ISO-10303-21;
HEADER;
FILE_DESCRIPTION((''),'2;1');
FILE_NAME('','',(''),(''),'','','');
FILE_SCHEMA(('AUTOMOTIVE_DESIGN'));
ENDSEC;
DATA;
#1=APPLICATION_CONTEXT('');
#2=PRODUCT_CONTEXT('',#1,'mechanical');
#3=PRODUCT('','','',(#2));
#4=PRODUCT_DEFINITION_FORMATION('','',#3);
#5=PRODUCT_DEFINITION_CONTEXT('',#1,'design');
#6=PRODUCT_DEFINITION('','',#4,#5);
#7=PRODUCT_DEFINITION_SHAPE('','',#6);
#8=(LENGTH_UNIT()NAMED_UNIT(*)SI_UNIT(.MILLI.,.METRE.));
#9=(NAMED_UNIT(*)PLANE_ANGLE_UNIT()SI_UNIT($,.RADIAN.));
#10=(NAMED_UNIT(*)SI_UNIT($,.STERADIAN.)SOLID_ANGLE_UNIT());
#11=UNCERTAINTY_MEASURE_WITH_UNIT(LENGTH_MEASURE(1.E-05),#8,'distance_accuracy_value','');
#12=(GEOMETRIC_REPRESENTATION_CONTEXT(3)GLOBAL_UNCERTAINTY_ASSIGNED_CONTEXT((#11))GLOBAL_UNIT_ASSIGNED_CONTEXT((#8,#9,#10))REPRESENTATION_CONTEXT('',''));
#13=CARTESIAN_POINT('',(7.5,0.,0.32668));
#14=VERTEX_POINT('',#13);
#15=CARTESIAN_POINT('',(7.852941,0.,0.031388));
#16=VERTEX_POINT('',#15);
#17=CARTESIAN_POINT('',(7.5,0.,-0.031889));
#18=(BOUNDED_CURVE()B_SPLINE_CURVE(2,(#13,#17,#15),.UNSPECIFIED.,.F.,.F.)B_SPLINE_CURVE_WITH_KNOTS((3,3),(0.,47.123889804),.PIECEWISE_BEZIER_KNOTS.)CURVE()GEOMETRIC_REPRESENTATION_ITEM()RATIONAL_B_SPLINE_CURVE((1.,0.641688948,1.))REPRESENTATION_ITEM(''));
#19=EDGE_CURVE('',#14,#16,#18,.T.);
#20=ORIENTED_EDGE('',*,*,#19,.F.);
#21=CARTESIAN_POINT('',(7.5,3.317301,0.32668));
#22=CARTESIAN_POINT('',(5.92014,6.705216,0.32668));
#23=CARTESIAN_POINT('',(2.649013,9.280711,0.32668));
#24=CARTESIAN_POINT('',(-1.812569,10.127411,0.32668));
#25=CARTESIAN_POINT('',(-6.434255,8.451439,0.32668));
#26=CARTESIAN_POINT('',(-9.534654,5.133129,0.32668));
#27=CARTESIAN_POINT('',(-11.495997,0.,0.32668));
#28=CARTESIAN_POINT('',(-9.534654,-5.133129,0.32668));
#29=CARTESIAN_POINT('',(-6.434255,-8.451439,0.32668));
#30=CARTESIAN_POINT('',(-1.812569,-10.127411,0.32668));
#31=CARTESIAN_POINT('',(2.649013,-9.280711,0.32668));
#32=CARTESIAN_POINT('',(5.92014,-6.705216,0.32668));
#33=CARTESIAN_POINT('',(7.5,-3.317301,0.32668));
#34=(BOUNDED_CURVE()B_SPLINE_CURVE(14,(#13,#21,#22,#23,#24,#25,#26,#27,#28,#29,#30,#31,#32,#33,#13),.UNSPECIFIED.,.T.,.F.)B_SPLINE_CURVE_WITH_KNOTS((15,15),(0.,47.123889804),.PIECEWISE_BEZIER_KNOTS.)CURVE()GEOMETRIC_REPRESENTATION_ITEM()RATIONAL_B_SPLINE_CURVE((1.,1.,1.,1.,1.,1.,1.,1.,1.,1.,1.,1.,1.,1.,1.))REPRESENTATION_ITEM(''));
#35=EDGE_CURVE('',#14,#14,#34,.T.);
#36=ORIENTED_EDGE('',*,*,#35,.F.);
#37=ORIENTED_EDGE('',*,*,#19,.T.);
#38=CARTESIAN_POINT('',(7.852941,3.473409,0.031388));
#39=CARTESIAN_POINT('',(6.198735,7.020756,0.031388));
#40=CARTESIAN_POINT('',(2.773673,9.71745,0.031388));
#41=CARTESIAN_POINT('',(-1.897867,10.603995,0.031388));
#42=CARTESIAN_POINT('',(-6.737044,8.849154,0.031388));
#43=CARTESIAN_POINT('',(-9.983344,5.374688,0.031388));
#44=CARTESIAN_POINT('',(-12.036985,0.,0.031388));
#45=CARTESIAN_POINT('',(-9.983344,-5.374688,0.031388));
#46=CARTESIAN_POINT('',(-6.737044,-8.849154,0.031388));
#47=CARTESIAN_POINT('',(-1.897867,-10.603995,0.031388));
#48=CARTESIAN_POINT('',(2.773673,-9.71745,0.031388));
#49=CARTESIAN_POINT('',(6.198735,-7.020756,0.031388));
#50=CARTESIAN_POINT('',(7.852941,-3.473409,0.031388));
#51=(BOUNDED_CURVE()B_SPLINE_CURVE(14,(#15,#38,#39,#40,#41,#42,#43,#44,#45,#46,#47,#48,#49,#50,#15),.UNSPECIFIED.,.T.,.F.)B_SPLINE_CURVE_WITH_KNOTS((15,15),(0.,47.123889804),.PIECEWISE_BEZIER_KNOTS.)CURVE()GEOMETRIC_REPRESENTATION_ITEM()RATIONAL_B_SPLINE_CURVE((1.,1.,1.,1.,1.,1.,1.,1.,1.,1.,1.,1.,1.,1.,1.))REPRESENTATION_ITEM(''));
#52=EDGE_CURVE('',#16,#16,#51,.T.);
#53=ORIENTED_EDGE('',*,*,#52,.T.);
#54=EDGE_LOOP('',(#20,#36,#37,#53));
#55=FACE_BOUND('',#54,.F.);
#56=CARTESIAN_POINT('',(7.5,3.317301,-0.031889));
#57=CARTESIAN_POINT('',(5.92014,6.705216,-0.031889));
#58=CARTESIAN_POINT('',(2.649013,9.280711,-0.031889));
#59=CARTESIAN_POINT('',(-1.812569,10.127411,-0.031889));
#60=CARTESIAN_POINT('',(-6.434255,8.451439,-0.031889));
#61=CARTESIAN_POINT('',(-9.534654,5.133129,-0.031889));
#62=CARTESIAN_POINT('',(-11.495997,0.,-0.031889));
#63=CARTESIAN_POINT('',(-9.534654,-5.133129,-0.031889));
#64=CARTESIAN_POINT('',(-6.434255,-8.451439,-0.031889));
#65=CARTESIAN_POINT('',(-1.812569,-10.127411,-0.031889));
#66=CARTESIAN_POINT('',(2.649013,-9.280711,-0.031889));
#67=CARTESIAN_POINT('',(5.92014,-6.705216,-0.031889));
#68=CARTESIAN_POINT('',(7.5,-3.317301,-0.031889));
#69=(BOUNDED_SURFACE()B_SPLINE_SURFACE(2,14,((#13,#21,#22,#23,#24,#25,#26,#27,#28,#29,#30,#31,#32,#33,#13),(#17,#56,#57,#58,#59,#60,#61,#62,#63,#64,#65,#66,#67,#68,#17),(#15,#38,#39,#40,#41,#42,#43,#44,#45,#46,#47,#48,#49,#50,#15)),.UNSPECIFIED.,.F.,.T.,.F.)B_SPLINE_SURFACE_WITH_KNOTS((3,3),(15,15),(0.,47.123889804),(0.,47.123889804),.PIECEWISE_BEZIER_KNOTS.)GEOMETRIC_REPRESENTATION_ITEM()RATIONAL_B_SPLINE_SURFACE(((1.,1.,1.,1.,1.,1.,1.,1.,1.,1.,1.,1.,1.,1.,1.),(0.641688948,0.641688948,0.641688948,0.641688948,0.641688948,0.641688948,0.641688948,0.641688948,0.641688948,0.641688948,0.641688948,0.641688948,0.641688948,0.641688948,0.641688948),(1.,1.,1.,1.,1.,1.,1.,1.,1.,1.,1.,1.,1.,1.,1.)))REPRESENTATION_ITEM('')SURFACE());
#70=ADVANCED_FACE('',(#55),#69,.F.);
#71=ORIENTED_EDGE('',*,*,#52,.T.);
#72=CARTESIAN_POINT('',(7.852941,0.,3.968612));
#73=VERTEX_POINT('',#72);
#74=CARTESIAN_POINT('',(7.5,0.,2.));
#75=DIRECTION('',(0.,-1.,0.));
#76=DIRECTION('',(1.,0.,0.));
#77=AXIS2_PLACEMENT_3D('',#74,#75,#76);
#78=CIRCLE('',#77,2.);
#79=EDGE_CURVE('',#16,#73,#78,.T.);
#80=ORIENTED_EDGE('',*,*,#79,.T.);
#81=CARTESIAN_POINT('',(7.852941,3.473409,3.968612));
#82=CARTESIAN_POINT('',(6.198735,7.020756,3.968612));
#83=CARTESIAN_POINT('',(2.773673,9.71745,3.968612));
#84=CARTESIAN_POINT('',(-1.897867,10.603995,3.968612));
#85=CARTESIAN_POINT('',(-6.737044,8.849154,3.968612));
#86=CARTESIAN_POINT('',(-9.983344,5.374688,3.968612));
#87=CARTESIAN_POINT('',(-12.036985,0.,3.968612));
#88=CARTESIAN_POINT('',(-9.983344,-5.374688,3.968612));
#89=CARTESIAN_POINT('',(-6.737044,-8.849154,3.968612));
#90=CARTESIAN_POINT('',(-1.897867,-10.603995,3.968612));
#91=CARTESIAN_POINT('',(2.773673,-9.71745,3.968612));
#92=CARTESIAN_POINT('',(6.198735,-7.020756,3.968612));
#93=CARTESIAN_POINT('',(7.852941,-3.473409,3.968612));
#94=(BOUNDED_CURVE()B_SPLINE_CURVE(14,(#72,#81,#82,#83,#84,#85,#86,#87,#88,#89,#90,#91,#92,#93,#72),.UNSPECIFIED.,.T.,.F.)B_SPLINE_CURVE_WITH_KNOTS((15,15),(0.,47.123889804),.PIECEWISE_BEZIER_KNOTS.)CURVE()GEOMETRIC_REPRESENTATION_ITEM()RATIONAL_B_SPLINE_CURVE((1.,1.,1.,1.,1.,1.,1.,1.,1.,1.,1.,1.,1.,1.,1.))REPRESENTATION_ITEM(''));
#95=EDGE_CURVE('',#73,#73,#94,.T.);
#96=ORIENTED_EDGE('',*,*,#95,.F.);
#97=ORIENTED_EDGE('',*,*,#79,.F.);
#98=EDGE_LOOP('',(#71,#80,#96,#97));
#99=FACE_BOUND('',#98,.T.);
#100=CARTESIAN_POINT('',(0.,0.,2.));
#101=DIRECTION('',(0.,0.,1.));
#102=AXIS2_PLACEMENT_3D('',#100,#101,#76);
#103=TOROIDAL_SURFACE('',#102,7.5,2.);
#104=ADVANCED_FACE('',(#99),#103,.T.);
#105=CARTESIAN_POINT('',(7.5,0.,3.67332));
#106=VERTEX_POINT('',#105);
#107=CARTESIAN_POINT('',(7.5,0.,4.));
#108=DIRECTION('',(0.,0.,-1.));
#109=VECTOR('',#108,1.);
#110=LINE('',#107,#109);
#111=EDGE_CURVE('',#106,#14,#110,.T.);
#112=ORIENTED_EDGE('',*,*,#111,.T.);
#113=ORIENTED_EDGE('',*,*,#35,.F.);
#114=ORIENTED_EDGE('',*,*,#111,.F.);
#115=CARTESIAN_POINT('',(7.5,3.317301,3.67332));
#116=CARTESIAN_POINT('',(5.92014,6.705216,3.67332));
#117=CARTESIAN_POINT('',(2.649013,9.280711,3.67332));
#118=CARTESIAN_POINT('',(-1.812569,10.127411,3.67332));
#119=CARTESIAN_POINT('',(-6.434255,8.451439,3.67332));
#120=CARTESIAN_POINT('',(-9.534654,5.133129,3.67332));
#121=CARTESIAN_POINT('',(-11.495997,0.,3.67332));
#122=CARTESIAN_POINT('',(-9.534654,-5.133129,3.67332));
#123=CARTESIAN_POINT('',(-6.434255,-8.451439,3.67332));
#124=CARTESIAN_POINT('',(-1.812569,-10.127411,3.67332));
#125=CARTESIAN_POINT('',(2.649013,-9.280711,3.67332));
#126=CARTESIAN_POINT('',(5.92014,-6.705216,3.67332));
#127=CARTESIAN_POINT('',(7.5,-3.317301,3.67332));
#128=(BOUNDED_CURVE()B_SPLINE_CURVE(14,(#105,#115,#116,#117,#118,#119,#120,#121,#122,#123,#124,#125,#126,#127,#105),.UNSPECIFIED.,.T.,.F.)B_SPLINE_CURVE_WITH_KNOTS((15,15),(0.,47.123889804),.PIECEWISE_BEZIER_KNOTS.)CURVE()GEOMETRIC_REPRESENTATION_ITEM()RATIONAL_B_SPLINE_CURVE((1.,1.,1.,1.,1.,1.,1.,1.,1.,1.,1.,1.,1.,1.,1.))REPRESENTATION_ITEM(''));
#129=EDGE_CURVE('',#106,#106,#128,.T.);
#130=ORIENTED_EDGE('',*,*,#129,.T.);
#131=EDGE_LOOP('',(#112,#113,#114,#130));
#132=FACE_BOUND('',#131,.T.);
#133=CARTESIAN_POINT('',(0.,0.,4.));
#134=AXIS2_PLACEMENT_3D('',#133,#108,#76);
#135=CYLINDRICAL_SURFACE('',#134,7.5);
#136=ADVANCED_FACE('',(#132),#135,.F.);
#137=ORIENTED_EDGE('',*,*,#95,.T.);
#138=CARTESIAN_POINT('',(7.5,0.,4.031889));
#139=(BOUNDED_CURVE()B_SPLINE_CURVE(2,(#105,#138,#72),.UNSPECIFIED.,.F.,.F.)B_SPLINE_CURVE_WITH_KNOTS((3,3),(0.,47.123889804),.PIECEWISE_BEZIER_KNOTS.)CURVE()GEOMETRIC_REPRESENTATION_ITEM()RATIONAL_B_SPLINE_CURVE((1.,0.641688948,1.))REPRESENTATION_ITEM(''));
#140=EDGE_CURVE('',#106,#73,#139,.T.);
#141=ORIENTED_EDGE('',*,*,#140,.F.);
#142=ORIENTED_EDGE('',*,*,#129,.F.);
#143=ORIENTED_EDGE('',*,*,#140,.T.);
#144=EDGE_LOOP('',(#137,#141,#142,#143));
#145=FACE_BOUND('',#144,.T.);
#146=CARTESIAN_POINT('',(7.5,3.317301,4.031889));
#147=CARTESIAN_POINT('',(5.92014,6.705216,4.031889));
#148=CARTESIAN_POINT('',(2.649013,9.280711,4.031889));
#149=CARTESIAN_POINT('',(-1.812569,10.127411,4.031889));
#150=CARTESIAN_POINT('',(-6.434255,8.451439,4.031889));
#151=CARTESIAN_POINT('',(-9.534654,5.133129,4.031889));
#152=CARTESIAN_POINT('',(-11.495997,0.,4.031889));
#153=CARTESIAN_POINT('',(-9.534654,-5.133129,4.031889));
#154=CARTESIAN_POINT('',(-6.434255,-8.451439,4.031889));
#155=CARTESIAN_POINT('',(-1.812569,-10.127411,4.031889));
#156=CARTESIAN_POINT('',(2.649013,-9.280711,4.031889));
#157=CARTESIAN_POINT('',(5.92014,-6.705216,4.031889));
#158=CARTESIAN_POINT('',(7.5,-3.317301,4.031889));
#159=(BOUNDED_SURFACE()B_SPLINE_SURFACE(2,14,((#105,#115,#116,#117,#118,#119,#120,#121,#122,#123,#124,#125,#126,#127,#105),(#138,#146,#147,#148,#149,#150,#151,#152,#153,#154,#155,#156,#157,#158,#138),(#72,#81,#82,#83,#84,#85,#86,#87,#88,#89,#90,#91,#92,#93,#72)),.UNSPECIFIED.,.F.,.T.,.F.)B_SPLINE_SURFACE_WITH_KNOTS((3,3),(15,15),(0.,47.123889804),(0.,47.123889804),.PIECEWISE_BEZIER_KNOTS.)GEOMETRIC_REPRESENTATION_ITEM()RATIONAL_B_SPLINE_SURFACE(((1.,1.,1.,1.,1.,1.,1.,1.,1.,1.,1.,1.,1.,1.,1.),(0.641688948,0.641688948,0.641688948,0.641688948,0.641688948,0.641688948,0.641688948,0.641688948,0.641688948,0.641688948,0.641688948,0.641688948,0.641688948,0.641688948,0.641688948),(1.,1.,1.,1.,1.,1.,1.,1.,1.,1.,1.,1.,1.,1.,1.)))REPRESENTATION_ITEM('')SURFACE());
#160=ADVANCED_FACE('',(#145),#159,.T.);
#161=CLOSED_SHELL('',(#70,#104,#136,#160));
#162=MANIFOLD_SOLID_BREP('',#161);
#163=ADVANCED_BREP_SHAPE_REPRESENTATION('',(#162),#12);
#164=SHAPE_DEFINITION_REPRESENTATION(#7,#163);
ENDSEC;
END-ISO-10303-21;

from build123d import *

# Parameters (mm, degrees)
F3_R = 0.3


with BuildPart() as f2:
    # F2: sweep along a path in F0
    with BuildLine(Plane.XY) as f2_path:
        CenterArc((0, 0), 7.5, 0, 360)
    # F1 (on Front) → F2 (sweep)
    with BuildSketch(Plane.XZ):
        with BuildLine():
            Line((7.5, 4), (7.5, 0))
            ThreePointArc((7.5, 0), (9.5, 2), (7.5, 4))
        make_face()
    sweep(path=f2_path.line)

    # F3
    f3_edges = [f2.edges().sort_by_distance(p)[0] for p in [
        (-7.5, 0, 4),
        (-7.5, 0, 0),
    ]]
    fillet(f3_edges, radius=F3_R)


solid = f2.part
